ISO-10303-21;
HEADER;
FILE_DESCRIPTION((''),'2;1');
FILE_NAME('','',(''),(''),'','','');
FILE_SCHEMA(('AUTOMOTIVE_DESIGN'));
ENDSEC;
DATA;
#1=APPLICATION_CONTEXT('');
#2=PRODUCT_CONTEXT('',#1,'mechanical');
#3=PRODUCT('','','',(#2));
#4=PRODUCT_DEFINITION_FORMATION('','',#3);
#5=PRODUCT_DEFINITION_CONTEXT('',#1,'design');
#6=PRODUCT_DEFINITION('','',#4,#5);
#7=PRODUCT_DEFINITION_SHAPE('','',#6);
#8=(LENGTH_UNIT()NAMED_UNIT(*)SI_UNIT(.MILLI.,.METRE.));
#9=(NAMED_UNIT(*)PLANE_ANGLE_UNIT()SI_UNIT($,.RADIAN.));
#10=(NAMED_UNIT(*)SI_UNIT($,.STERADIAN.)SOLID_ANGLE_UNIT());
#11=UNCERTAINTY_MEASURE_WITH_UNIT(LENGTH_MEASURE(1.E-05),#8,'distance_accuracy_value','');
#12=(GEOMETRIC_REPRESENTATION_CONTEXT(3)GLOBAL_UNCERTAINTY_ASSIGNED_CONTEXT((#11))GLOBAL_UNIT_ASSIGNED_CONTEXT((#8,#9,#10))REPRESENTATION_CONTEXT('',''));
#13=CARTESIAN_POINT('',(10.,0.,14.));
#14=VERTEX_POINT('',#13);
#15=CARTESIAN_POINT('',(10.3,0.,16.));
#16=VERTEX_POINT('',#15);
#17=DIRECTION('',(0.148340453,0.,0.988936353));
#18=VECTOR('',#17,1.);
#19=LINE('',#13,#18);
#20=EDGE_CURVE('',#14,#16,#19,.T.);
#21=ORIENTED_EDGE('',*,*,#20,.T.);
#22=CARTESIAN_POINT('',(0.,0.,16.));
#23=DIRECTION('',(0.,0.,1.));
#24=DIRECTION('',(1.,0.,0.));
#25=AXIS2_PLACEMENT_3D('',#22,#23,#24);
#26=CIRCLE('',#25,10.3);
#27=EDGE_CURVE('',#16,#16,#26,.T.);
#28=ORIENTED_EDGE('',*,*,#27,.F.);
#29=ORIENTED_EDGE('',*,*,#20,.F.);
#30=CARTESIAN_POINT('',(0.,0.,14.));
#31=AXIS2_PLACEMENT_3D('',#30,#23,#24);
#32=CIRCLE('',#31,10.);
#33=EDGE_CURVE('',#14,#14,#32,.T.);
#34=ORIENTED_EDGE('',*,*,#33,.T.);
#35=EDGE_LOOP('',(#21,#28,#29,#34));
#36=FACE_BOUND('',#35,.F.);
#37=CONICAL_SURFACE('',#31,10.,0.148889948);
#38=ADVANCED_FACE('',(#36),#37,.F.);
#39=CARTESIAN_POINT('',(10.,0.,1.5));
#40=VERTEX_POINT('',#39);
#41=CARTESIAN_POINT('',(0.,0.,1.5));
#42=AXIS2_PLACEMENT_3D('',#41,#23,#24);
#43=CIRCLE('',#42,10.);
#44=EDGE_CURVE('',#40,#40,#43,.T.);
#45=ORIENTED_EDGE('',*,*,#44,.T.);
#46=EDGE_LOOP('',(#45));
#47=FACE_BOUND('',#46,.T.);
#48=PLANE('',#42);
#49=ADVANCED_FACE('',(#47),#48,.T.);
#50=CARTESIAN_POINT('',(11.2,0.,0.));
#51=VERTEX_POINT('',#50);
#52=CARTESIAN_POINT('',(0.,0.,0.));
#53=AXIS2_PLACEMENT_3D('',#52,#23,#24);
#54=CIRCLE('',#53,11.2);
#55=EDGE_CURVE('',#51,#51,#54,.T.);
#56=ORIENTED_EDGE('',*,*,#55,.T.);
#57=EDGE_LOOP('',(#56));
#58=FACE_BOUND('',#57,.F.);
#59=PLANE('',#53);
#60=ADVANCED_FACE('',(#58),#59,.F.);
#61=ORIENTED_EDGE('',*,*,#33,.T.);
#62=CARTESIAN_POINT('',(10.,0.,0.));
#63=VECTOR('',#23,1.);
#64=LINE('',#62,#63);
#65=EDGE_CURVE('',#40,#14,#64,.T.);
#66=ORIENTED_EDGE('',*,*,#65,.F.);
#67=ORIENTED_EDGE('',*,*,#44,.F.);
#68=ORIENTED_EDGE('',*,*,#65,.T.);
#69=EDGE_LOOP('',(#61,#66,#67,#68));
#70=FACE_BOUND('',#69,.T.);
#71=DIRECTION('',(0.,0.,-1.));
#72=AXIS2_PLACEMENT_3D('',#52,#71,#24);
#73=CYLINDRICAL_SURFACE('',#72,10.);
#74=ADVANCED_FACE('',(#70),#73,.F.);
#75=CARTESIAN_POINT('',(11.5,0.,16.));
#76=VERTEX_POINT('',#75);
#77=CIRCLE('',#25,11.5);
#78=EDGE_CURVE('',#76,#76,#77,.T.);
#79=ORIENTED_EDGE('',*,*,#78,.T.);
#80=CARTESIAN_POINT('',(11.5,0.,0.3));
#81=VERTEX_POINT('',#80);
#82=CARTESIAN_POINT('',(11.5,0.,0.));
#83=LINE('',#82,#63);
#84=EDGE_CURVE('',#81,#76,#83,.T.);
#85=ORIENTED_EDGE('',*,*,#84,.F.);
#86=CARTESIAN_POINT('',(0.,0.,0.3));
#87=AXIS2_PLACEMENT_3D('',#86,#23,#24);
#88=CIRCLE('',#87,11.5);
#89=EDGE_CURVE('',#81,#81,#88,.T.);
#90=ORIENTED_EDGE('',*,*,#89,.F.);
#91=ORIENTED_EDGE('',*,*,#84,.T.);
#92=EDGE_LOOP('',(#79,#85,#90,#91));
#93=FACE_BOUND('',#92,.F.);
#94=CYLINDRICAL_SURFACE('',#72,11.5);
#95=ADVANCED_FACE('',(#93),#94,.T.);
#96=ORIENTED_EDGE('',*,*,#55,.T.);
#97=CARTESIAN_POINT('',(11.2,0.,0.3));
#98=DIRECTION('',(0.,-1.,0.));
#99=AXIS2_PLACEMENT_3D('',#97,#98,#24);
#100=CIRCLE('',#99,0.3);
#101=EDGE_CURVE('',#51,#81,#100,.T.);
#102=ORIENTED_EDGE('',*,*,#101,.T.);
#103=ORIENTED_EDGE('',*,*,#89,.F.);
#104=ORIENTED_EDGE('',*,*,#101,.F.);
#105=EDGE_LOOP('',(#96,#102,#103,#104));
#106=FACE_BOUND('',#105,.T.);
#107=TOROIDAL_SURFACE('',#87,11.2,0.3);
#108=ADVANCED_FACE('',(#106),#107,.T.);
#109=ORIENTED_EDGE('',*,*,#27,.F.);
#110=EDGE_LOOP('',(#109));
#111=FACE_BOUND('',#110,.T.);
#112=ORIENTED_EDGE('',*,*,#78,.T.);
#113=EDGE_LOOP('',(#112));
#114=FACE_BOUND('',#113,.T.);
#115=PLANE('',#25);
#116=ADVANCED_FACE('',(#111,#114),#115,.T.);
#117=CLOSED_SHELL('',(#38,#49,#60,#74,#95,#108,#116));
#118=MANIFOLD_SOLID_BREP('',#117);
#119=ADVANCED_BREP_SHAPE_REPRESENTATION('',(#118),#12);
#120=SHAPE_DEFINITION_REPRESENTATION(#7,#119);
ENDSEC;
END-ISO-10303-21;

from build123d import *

# Parameters (mm, degrees)
F2_R     = 11.5
F2_R_2   = 10
F3_DEPTH = 16
F4_DEPTH = 1.5
F5_R     = 0.3
F6_SIZE2 = 0.3
F6_SIZE  = 2


with BuildPart() as f3:
    # F2 (on Top) → F3 (new body)
    with BuildSketch(Plane.XY):
        Circle(F2_R)
        Circle(F2_R_2, mode=Mode.SUBTRACT)
    extrude(amount=F3_DEPTH)

    # F2 (on Top) → F4 (join)
    with BuildSketch(Plane.XY):
        Circle(F2_R_2)
    extrude(amount=F4_DEPTH)

    # F5
    f5_edges = [f3.edges().sort_by_distance(p)[0] for p in [
        (-11.5, 0, 0),
    ]]
    fillet(f5_edges, radius=F5_R)

    # F6
    f6_edges = [f3.edges().sort_by_distance(p)[0] for p in [
        (-10, 0, 16),
    ]]
    f6_side = f3.faces().sort_by_distance((-10, 0, 8.75))[0]
    chamfer(f6_edges, length=F6_SIZE, length2=F6_SIZE2, reference=f6_side)


solid = f3.part
